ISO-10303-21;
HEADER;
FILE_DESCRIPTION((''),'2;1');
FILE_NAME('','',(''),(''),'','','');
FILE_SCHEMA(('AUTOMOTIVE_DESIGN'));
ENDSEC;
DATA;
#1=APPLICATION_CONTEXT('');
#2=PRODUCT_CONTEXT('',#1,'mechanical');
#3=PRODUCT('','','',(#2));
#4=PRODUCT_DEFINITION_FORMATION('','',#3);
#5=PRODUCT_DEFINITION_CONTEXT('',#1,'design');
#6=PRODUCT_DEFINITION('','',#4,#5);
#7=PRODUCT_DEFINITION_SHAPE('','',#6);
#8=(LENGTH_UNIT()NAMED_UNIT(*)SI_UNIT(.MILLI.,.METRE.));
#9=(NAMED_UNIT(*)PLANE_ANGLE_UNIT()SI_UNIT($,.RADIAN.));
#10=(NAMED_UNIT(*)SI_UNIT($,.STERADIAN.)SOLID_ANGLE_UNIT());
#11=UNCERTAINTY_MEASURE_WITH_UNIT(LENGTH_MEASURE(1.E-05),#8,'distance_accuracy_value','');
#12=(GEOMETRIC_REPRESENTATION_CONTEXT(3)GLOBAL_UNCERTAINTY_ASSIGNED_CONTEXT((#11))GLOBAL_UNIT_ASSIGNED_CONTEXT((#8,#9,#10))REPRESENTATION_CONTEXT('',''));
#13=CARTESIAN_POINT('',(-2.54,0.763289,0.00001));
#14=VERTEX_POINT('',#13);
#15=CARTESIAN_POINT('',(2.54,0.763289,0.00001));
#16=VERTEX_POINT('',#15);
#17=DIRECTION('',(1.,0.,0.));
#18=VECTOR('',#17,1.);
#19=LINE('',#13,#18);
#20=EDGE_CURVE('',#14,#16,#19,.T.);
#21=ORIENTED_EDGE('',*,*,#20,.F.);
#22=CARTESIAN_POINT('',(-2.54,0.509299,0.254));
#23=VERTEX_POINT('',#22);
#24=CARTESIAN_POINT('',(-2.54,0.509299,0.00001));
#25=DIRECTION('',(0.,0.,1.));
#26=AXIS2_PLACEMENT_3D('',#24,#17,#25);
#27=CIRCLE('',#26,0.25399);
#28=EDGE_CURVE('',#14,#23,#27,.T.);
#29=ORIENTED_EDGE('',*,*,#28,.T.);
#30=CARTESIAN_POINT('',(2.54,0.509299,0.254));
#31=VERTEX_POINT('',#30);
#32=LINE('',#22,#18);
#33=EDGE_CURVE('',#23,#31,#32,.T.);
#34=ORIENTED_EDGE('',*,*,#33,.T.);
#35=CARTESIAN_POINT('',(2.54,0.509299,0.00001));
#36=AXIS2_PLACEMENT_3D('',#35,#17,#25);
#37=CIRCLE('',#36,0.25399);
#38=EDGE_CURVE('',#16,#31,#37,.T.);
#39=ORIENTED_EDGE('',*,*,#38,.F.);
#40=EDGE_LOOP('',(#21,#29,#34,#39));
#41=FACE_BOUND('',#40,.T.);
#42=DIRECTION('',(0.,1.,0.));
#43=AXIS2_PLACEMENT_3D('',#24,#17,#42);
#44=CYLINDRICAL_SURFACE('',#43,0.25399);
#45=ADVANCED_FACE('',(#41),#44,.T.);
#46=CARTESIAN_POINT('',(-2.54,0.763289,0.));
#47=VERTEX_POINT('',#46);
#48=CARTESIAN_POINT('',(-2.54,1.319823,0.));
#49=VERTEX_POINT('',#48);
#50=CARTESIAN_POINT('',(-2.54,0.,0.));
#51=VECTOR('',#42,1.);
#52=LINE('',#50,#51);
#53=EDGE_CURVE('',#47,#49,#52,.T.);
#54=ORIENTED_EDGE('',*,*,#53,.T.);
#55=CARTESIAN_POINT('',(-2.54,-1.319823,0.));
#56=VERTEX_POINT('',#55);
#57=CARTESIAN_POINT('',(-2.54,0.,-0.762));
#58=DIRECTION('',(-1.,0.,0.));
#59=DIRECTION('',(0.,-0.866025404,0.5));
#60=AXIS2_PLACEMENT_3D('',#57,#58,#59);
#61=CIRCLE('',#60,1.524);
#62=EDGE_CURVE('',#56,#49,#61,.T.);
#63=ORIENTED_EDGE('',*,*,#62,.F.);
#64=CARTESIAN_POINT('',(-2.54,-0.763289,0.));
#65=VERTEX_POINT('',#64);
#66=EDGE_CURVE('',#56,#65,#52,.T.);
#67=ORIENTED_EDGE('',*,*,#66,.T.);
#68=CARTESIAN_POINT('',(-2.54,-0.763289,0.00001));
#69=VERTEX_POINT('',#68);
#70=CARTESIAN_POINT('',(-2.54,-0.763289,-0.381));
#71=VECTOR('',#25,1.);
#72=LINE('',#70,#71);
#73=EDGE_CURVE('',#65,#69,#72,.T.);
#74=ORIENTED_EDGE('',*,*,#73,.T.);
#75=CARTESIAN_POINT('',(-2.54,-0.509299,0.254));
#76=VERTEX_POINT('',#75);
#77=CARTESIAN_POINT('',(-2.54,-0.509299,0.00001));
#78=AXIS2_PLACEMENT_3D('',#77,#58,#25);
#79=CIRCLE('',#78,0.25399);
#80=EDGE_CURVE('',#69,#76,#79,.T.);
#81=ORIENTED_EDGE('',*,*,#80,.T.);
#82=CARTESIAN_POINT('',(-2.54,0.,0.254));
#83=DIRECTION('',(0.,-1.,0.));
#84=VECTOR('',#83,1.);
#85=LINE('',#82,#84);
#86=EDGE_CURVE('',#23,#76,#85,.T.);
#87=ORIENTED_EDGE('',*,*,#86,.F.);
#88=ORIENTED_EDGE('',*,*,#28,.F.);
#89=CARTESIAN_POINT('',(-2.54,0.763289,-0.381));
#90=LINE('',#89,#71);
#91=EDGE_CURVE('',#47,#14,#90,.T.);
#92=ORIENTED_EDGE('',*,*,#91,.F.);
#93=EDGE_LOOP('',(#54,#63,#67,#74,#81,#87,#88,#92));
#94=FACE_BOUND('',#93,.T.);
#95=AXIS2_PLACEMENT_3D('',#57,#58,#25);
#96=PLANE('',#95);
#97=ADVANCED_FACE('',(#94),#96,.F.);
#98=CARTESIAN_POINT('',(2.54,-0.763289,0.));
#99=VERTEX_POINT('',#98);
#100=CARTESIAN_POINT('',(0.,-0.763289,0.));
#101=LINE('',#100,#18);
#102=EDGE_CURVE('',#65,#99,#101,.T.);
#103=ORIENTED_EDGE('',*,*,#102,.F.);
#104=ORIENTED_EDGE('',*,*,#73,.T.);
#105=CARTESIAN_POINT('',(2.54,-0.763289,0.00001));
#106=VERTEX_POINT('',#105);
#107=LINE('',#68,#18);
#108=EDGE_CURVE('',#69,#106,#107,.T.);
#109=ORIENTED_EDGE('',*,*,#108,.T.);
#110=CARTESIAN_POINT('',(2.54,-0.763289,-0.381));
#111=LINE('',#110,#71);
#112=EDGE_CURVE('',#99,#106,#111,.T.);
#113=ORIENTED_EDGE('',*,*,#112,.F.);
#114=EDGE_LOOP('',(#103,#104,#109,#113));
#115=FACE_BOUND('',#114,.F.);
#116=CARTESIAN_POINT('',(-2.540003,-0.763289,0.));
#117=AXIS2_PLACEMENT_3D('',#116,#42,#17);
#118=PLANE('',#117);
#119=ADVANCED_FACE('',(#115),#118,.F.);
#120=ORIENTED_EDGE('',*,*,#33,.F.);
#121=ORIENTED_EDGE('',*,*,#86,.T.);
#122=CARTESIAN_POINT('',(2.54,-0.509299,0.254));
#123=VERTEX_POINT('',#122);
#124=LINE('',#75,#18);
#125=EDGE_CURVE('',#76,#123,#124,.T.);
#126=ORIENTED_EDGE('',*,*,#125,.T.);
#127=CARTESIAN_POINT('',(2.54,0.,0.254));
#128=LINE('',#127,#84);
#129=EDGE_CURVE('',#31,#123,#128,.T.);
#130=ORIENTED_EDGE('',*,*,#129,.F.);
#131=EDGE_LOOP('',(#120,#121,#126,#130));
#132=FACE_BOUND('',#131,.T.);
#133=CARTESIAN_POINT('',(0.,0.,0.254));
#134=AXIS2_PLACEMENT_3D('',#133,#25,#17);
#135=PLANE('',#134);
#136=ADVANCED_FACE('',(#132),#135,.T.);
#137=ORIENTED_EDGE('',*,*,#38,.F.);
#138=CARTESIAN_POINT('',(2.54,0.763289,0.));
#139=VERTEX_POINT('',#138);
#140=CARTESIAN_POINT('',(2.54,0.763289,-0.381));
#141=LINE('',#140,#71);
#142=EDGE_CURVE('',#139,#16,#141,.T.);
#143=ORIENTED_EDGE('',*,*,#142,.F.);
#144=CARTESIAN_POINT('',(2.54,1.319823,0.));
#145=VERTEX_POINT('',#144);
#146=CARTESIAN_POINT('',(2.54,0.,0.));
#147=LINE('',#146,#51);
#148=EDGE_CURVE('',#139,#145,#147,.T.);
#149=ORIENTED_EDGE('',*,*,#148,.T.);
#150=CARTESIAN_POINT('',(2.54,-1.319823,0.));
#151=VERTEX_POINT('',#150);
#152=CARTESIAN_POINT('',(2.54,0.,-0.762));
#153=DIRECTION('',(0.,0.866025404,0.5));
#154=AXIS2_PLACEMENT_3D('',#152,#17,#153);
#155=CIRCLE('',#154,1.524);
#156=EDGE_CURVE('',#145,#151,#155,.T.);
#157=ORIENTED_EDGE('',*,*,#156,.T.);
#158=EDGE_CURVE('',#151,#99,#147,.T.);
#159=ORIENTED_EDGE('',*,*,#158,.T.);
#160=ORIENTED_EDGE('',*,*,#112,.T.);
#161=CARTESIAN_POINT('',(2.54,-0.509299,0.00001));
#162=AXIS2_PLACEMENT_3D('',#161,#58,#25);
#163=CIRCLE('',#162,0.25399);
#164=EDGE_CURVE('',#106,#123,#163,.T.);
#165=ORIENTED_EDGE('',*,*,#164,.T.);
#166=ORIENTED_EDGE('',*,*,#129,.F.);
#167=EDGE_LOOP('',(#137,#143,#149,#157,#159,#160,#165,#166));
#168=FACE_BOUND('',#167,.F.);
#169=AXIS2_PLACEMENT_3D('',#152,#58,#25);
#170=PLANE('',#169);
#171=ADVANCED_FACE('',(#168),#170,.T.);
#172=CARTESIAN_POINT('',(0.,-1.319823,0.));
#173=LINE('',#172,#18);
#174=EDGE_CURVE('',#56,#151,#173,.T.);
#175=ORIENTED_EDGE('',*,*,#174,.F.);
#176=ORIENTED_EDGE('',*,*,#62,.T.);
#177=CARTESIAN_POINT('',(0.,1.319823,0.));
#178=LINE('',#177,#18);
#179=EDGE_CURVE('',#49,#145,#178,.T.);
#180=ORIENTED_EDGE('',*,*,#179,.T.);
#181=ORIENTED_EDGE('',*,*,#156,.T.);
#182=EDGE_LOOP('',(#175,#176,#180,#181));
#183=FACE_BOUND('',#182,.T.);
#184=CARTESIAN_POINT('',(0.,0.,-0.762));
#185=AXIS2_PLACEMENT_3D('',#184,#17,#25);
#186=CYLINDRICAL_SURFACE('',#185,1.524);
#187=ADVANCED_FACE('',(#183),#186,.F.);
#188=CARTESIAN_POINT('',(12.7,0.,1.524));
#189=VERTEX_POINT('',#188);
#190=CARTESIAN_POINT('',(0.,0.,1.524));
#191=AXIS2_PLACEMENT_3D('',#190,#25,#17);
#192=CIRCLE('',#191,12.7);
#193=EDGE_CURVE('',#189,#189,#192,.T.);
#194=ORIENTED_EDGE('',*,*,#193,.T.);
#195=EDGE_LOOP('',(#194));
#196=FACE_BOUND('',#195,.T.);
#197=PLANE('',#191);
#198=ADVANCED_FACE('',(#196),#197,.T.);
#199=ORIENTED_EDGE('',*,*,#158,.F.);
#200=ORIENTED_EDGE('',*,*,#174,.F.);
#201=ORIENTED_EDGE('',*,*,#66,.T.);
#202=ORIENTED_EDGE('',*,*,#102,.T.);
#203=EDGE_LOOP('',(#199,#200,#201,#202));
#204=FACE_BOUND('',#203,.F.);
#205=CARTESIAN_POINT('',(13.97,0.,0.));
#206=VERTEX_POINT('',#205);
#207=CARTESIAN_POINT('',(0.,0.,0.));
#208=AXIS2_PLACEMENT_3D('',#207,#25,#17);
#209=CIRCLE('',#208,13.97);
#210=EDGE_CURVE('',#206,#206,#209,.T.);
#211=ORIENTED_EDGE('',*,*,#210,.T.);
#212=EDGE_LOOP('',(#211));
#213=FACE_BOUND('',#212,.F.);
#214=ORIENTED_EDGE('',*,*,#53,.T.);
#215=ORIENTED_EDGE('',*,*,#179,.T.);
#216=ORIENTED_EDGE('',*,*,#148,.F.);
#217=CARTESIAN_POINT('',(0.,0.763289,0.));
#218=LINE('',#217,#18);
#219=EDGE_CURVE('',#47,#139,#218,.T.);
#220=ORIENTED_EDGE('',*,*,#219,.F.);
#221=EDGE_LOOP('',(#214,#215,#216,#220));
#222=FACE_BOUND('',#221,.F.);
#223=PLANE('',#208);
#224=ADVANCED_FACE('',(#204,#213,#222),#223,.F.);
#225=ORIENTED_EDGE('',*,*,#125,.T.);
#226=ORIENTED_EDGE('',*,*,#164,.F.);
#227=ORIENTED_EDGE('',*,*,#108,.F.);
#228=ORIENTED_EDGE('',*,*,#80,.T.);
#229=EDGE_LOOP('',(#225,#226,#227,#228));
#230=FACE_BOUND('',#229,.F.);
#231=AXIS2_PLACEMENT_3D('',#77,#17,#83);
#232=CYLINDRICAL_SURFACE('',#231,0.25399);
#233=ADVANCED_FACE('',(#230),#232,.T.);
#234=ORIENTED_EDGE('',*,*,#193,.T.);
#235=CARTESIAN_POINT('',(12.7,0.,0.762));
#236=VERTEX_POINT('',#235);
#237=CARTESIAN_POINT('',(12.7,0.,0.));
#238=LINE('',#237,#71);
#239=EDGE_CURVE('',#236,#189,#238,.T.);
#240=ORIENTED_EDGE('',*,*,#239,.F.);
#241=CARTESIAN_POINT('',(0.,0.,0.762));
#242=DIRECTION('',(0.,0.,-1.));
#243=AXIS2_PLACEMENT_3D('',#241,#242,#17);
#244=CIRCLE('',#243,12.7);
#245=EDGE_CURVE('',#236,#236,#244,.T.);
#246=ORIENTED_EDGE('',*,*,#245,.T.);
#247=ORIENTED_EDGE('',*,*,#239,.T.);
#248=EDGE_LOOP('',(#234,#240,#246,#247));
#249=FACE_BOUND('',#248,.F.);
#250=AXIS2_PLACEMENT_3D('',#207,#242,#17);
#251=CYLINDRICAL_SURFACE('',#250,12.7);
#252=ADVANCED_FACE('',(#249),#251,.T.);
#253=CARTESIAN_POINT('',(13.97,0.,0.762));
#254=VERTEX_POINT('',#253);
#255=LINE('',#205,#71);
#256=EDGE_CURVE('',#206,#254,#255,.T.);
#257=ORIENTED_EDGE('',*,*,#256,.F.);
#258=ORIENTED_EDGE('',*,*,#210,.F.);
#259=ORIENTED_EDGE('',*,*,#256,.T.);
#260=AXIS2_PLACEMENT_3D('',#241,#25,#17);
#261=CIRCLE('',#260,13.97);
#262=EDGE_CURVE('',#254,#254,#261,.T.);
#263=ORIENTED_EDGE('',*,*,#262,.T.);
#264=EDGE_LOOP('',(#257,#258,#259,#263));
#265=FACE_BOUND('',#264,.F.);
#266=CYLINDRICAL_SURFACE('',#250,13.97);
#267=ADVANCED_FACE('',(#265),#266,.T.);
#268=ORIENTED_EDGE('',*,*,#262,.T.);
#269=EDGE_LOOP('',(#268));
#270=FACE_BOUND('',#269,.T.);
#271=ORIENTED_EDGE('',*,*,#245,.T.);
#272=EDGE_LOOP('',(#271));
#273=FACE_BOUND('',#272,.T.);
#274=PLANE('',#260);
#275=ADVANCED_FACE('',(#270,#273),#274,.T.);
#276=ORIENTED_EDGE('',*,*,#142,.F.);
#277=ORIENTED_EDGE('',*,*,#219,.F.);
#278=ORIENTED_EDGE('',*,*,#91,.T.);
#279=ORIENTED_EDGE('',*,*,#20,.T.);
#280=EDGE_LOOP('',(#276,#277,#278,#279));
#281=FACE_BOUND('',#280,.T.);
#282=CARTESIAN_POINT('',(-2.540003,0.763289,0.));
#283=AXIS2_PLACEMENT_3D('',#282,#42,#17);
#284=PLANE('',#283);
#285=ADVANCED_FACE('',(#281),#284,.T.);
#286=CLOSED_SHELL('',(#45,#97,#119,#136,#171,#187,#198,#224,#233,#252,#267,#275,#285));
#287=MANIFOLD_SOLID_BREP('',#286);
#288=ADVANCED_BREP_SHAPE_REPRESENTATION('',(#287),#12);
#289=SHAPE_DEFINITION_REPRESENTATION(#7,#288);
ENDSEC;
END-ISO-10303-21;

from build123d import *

# Parameters (mm, degrees)
F0_R     = 12.7
F1_DEPTH = 1.524
F2_R     = 13.97
F3_DEPTH = 0.762
F4_W     = 5.08
F4_H     = 1.524
F6_W     = 5.08000508
F6_H     = 1.5265774739
F7_DEPTH = 0.254
F8_R     = 0.25399


# Not quite as in the source:
# - a fillet or chamfer is up to 0.001 mm smaller than in the source, because OpenCascade refuses the exact size


with BuildPart() as f1:
    # F0 (on Top) → F1 (new body)
    with BuildSketch(Plane.XY):
        Circle(F0_R)
    extrude(amount=F1_DEPTH)

    # F2 (on Top) → F3 (join)
    with BuildSketch(Plane.XY):
        Circle(F2_R)
    extrude(amount=F3_DEPTH)

    # F4 (on Front) → F5 (revolve, cut)
    with BuildSketch(Plane.XZ):
        Rectangle(F4_W, F4_H)
    revolve(axis=Axis((0, 0, -0.762), (-1, 0, 0)), mode=Mode.SUBTRACT)

    # F6 (on Top) → F7 (join)
    with BuildSketch(Plane.XY):
        Rectangle(F6_W, F6_H)
    extrude(amount=F7_DEPTH)

    # F8 (radius 0.254 in the source; OpenCascade refuses exactly that, so slightly less here)
    f8_edges = [f1.edges().sort_by_distance(p)[0] for p in [
        (0, 0.763289, 0.254),
        (0, -0.763289, 0.254),
    ]]
    fillet(f8_edges, radius=F8_R)


solid = f1.part
